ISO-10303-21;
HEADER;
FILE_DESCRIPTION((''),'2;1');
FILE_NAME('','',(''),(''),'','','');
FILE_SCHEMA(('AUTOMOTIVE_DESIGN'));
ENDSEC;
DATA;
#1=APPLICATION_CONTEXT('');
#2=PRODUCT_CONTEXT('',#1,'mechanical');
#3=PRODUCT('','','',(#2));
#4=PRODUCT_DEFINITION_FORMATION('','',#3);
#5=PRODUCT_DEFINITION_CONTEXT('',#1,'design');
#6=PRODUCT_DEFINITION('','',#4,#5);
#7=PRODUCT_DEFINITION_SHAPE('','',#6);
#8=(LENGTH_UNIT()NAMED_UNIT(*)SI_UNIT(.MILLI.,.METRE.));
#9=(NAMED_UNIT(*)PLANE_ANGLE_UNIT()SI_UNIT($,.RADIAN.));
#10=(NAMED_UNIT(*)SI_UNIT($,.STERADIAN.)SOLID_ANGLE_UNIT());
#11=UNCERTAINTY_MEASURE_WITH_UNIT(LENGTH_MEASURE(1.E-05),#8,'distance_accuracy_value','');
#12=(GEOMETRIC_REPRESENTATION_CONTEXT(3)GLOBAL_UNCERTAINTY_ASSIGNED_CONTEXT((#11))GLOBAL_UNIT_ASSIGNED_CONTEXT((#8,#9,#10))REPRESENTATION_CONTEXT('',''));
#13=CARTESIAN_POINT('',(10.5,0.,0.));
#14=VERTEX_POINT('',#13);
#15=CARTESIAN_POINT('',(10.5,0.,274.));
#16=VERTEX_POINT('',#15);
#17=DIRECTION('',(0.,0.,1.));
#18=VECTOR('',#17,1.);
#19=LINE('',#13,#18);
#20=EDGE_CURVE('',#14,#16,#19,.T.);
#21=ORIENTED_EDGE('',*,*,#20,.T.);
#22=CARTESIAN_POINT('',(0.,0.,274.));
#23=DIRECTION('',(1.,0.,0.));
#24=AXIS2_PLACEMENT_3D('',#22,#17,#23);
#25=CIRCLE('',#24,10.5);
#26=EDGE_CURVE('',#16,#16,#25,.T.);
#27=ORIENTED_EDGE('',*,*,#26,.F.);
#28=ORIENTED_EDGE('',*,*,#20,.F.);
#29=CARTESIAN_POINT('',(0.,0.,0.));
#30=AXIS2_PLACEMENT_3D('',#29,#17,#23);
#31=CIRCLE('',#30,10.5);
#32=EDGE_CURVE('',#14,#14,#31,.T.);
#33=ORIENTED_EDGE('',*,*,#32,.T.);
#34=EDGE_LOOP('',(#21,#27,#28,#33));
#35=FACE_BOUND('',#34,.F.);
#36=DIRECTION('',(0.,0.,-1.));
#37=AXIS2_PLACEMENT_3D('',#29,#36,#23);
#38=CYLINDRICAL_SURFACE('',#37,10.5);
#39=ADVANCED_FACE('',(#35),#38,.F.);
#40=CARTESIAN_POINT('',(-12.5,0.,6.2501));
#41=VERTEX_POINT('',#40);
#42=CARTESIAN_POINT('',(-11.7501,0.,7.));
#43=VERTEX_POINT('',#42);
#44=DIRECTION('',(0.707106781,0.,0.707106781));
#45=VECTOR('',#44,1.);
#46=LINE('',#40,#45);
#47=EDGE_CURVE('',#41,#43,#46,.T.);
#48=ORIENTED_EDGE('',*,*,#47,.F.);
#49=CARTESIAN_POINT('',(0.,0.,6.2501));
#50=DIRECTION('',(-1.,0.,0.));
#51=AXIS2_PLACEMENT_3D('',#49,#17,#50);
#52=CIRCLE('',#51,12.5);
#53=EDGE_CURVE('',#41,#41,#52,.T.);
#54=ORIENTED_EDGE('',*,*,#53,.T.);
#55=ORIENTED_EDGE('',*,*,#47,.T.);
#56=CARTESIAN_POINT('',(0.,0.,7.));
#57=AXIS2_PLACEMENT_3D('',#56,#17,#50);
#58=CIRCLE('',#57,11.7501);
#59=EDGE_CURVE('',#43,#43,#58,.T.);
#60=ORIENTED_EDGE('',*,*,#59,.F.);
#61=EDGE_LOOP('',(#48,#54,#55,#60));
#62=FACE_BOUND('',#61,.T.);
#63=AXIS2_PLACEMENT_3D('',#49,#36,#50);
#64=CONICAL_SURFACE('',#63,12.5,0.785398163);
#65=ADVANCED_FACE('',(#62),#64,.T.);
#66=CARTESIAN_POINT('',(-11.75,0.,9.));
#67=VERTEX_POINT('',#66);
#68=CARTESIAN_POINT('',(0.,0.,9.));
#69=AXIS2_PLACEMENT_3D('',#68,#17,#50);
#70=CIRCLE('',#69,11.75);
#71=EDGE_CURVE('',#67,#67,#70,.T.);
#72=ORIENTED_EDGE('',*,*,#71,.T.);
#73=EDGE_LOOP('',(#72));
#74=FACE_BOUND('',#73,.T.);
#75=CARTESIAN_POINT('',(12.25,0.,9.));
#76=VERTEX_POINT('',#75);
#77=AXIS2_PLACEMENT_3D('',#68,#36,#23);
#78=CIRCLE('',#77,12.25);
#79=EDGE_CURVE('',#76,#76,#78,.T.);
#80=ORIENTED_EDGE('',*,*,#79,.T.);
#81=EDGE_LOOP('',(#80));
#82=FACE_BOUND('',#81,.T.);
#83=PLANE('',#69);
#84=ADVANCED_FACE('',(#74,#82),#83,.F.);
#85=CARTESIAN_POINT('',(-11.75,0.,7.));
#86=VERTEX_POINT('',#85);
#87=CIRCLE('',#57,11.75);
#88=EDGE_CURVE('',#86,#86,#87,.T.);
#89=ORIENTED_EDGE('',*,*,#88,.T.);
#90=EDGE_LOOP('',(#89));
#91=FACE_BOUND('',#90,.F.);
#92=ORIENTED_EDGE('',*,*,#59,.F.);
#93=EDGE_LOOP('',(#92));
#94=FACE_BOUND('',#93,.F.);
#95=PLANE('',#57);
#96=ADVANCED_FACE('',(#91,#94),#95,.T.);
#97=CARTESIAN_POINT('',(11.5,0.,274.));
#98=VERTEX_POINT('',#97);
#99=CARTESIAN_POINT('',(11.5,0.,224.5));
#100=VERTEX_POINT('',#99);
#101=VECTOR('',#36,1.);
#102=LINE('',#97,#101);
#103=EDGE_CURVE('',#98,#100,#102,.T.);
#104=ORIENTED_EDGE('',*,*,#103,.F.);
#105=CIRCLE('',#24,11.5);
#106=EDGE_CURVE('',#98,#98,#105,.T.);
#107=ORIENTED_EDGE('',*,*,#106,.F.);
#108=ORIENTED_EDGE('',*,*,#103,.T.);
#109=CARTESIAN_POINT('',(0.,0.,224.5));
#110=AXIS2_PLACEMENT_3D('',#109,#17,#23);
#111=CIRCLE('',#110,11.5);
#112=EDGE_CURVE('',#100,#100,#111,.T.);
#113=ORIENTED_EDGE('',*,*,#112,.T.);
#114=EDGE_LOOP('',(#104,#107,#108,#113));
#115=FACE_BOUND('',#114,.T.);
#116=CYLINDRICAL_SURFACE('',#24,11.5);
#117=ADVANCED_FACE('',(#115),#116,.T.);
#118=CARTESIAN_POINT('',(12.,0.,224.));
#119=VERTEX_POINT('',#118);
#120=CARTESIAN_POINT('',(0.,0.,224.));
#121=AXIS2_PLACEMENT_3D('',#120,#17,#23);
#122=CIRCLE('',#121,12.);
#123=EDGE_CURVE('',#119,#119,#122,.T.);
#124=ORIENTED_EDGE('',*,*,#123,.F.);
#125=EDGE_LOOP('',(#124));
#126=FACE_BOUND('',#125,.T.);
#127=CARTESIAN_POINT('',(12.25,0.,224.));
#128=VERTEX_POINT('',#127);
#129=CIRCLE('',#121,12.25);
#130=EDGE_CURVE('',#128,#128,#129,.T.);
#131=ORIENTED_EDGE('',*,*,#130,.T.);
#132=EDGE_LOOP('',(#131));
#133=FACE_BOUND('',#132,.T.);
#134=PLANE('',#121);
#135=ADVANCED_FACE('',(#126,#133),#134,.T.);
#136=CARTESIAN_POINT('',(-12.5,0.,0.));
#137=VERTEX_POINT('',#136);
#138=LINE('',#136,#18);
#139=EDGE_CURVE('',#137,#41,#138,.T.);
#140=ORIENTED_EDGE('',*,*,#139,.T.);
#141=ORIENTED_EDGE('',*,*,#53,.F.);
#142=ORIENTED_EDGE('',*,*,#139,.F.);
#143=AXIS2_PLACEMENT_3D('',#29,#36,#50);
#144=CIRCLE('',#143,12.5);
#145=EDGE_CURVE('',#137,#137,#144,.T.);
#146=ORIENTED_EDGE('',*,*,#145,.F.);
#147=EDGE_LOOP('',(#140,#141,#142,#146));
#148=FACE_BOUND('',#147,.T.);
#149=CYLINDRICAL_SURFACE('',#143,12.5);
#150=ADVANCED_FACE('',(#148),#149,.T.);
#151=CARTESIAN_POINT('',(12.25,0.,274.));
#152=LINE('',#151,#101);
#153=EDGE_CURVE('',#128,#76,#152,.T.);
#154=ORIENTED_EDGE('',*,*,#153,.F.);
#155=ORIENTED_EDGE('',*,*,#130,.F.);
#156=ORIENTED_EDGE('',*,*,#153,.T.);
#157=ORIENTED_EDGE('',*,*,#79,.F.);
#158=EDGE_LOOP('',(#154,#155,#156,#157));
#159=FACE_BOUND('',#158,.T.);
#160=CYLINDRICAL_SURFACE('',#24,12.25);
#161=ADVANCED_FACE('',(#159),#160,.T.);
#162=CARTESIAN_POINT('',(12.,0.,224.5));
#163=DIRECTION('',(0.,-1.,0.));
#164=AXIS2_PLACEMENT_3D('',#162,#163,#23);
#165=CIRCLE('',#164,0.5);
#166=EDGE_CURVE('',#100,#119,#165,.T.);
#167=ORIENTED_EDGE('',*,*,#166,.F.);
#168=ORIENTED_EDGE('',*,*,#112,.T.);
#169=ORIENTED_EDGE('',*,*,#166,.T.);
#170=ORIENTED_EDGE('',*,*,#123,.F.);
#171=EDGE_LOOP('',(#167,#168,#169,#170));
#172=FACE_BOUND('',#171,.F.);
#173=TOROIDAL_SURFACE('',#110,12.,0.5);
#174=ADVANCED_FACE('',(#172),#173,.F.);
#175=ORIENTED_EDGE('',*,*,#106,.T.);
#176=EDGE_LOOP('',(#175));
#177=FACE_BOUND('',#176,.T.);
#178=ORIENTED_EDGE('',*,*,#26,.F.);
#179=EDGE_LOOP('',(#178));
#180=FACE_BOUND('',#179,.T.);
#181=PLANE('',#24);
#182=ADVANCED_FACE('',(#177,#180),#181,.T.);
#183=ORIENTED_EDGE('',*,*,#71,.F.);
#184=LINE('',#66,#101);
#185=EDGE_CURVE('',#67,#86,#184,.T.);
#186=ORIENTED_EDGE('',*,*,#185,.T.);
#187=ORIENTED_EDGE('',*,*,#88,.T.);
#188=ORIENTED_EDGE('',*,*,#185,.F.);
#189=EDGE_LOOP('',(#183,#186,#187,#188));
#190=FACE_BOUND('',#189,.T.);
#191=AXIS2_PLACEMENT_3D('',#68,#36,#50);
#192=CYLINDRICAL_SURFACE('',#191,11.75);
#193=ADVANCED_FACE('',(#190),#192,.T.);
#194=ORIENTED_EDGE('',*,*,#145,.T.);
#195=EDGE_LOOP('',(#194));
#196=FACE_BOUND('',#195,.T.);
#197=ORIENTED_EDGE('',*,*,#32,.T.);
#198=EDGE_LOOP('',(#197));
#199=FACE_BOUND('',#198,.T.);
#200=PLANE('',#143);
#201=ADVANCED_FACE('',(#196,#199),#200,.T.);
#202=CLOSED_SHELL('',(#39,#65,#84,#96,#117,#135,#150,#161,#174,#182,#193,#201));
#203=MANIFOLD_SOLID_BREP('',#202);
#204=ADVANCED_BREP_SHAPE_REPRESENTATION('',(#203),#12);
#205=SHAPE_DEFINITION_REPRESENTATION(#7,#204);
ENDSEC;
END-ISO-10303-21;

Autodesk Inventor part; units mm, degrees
ref_plane "YZ Plane" through (0, 0, 0) normal (1, 0, 0) x (0, 1, 0)
ref_plane "XZ Plane" through (0, 0, 0) normal (0, 1, 0) x (-1, 0, 0)
ref_plane "XY Plane" through (0, 0, 0) normal (0, 0, 1) x (1, 0, 0)
sketch "Skizze1" plane through (0, 0, 0) normal (0, 0, 1) x (1, 0, 0)
  circle A0 centre (0, 0) radius 10.5
  circle A1 centre (0, 0) radius 12.55
  dimension "d0" = 25.1
  dimension "d1" = 2.05
extrude "Extrusion1" add sketch "Skizze1" along normal blind 274
sketch "Skizze2" plane through (0, 0, 274) normal (0, 0, 1) x (1, 0, 0)
  circle A0 centre (0, 0) radius 12.55 projected
  circle A1 centre (0, 0) radius 12.25
  dimension "d4" = 24.5
extrude "Extrusion2" cut sketch "Skizze2" against normal through all
sketch "Skizze3" plane through (0, 0, 0) normal (0, 0, -1) x (-1, 0, 0)
  circle A0 centre (0, 0) radius 12.25 projected
  circle A1 centre (0, 0) radius 10.5 projected
  circle A2 centre (0, 0) radius 12.5
  dimension "d7" = 25
extrude "Extrusion3" add sketch "Skizze3" against normal blind 9 contours A2
sketch "Skizze4" plane through (0, 0, 274) normal (0, 0, 1) x (1, 0, 0)
  circle A0 centre (0, 0) radius 12.25 projected
  circle A1 centre (0, 0) radius 10.5 projected
  circle A2 centre (0, 0) radius 11.5
  dimension "d10" = 23
extrude "Extrusion4" cut sketch "Skizze4" against normal blind 50 contours A0
sketch "Skizze5" plane through (0, 0, 0) normal (0, 1, 0) x (-1, 0, 0)
  line L0 (-12.5, 9) -> (12.5, 9) projected
  line L1 (12.5, 0) -> (-12.5, 0) projected
  line L2 (12.25, 9) -> (-12.25, 9) projected
  line L3 (12.5, 0) -> (12.5, 9) projected
  line L4 (10.5, 0) -> (10.5, 274) projected
  line L5 (12.25, 224) -> (12.25, 9) projected
  line L6 (12.5, 9) -> (11.75, 9)
  line L7 (11.75, 9) -> (11.75, 7)
  line L8 (11.75, 7) -> (12.5, 7)
  line L9 (12.5, 7) -> (12.5, 9)
  line L10 (17.5, 0) -> (-17.5, 0) projected
  line L11 (0, -54.8) -> (0, 328.8) projected
  point P0 (0, 0)
  point P1 (-9.75, 200)
  point P2 (9.75, 200)
  dimension "d13" = 2
  dimension "d14" = 23.5
revolve "Umdrehung1" cut sketch "Skizze5" angle 360 about axis through (0, 0, -10) along (0, 0, 1) contours L0 L3 L8 L7
chamfer "Fase1" distance 0.75 angle 45 1 edges at (12.5, 0, 7)
thread "Gewinde3" size "M25x1" class "6g" standard "ANSI Metric M Profile" full length
fillet "Rundung1" radius 0.5 1 edges at (-11.5, 0, 224)
properties part number "13_0204_025"
